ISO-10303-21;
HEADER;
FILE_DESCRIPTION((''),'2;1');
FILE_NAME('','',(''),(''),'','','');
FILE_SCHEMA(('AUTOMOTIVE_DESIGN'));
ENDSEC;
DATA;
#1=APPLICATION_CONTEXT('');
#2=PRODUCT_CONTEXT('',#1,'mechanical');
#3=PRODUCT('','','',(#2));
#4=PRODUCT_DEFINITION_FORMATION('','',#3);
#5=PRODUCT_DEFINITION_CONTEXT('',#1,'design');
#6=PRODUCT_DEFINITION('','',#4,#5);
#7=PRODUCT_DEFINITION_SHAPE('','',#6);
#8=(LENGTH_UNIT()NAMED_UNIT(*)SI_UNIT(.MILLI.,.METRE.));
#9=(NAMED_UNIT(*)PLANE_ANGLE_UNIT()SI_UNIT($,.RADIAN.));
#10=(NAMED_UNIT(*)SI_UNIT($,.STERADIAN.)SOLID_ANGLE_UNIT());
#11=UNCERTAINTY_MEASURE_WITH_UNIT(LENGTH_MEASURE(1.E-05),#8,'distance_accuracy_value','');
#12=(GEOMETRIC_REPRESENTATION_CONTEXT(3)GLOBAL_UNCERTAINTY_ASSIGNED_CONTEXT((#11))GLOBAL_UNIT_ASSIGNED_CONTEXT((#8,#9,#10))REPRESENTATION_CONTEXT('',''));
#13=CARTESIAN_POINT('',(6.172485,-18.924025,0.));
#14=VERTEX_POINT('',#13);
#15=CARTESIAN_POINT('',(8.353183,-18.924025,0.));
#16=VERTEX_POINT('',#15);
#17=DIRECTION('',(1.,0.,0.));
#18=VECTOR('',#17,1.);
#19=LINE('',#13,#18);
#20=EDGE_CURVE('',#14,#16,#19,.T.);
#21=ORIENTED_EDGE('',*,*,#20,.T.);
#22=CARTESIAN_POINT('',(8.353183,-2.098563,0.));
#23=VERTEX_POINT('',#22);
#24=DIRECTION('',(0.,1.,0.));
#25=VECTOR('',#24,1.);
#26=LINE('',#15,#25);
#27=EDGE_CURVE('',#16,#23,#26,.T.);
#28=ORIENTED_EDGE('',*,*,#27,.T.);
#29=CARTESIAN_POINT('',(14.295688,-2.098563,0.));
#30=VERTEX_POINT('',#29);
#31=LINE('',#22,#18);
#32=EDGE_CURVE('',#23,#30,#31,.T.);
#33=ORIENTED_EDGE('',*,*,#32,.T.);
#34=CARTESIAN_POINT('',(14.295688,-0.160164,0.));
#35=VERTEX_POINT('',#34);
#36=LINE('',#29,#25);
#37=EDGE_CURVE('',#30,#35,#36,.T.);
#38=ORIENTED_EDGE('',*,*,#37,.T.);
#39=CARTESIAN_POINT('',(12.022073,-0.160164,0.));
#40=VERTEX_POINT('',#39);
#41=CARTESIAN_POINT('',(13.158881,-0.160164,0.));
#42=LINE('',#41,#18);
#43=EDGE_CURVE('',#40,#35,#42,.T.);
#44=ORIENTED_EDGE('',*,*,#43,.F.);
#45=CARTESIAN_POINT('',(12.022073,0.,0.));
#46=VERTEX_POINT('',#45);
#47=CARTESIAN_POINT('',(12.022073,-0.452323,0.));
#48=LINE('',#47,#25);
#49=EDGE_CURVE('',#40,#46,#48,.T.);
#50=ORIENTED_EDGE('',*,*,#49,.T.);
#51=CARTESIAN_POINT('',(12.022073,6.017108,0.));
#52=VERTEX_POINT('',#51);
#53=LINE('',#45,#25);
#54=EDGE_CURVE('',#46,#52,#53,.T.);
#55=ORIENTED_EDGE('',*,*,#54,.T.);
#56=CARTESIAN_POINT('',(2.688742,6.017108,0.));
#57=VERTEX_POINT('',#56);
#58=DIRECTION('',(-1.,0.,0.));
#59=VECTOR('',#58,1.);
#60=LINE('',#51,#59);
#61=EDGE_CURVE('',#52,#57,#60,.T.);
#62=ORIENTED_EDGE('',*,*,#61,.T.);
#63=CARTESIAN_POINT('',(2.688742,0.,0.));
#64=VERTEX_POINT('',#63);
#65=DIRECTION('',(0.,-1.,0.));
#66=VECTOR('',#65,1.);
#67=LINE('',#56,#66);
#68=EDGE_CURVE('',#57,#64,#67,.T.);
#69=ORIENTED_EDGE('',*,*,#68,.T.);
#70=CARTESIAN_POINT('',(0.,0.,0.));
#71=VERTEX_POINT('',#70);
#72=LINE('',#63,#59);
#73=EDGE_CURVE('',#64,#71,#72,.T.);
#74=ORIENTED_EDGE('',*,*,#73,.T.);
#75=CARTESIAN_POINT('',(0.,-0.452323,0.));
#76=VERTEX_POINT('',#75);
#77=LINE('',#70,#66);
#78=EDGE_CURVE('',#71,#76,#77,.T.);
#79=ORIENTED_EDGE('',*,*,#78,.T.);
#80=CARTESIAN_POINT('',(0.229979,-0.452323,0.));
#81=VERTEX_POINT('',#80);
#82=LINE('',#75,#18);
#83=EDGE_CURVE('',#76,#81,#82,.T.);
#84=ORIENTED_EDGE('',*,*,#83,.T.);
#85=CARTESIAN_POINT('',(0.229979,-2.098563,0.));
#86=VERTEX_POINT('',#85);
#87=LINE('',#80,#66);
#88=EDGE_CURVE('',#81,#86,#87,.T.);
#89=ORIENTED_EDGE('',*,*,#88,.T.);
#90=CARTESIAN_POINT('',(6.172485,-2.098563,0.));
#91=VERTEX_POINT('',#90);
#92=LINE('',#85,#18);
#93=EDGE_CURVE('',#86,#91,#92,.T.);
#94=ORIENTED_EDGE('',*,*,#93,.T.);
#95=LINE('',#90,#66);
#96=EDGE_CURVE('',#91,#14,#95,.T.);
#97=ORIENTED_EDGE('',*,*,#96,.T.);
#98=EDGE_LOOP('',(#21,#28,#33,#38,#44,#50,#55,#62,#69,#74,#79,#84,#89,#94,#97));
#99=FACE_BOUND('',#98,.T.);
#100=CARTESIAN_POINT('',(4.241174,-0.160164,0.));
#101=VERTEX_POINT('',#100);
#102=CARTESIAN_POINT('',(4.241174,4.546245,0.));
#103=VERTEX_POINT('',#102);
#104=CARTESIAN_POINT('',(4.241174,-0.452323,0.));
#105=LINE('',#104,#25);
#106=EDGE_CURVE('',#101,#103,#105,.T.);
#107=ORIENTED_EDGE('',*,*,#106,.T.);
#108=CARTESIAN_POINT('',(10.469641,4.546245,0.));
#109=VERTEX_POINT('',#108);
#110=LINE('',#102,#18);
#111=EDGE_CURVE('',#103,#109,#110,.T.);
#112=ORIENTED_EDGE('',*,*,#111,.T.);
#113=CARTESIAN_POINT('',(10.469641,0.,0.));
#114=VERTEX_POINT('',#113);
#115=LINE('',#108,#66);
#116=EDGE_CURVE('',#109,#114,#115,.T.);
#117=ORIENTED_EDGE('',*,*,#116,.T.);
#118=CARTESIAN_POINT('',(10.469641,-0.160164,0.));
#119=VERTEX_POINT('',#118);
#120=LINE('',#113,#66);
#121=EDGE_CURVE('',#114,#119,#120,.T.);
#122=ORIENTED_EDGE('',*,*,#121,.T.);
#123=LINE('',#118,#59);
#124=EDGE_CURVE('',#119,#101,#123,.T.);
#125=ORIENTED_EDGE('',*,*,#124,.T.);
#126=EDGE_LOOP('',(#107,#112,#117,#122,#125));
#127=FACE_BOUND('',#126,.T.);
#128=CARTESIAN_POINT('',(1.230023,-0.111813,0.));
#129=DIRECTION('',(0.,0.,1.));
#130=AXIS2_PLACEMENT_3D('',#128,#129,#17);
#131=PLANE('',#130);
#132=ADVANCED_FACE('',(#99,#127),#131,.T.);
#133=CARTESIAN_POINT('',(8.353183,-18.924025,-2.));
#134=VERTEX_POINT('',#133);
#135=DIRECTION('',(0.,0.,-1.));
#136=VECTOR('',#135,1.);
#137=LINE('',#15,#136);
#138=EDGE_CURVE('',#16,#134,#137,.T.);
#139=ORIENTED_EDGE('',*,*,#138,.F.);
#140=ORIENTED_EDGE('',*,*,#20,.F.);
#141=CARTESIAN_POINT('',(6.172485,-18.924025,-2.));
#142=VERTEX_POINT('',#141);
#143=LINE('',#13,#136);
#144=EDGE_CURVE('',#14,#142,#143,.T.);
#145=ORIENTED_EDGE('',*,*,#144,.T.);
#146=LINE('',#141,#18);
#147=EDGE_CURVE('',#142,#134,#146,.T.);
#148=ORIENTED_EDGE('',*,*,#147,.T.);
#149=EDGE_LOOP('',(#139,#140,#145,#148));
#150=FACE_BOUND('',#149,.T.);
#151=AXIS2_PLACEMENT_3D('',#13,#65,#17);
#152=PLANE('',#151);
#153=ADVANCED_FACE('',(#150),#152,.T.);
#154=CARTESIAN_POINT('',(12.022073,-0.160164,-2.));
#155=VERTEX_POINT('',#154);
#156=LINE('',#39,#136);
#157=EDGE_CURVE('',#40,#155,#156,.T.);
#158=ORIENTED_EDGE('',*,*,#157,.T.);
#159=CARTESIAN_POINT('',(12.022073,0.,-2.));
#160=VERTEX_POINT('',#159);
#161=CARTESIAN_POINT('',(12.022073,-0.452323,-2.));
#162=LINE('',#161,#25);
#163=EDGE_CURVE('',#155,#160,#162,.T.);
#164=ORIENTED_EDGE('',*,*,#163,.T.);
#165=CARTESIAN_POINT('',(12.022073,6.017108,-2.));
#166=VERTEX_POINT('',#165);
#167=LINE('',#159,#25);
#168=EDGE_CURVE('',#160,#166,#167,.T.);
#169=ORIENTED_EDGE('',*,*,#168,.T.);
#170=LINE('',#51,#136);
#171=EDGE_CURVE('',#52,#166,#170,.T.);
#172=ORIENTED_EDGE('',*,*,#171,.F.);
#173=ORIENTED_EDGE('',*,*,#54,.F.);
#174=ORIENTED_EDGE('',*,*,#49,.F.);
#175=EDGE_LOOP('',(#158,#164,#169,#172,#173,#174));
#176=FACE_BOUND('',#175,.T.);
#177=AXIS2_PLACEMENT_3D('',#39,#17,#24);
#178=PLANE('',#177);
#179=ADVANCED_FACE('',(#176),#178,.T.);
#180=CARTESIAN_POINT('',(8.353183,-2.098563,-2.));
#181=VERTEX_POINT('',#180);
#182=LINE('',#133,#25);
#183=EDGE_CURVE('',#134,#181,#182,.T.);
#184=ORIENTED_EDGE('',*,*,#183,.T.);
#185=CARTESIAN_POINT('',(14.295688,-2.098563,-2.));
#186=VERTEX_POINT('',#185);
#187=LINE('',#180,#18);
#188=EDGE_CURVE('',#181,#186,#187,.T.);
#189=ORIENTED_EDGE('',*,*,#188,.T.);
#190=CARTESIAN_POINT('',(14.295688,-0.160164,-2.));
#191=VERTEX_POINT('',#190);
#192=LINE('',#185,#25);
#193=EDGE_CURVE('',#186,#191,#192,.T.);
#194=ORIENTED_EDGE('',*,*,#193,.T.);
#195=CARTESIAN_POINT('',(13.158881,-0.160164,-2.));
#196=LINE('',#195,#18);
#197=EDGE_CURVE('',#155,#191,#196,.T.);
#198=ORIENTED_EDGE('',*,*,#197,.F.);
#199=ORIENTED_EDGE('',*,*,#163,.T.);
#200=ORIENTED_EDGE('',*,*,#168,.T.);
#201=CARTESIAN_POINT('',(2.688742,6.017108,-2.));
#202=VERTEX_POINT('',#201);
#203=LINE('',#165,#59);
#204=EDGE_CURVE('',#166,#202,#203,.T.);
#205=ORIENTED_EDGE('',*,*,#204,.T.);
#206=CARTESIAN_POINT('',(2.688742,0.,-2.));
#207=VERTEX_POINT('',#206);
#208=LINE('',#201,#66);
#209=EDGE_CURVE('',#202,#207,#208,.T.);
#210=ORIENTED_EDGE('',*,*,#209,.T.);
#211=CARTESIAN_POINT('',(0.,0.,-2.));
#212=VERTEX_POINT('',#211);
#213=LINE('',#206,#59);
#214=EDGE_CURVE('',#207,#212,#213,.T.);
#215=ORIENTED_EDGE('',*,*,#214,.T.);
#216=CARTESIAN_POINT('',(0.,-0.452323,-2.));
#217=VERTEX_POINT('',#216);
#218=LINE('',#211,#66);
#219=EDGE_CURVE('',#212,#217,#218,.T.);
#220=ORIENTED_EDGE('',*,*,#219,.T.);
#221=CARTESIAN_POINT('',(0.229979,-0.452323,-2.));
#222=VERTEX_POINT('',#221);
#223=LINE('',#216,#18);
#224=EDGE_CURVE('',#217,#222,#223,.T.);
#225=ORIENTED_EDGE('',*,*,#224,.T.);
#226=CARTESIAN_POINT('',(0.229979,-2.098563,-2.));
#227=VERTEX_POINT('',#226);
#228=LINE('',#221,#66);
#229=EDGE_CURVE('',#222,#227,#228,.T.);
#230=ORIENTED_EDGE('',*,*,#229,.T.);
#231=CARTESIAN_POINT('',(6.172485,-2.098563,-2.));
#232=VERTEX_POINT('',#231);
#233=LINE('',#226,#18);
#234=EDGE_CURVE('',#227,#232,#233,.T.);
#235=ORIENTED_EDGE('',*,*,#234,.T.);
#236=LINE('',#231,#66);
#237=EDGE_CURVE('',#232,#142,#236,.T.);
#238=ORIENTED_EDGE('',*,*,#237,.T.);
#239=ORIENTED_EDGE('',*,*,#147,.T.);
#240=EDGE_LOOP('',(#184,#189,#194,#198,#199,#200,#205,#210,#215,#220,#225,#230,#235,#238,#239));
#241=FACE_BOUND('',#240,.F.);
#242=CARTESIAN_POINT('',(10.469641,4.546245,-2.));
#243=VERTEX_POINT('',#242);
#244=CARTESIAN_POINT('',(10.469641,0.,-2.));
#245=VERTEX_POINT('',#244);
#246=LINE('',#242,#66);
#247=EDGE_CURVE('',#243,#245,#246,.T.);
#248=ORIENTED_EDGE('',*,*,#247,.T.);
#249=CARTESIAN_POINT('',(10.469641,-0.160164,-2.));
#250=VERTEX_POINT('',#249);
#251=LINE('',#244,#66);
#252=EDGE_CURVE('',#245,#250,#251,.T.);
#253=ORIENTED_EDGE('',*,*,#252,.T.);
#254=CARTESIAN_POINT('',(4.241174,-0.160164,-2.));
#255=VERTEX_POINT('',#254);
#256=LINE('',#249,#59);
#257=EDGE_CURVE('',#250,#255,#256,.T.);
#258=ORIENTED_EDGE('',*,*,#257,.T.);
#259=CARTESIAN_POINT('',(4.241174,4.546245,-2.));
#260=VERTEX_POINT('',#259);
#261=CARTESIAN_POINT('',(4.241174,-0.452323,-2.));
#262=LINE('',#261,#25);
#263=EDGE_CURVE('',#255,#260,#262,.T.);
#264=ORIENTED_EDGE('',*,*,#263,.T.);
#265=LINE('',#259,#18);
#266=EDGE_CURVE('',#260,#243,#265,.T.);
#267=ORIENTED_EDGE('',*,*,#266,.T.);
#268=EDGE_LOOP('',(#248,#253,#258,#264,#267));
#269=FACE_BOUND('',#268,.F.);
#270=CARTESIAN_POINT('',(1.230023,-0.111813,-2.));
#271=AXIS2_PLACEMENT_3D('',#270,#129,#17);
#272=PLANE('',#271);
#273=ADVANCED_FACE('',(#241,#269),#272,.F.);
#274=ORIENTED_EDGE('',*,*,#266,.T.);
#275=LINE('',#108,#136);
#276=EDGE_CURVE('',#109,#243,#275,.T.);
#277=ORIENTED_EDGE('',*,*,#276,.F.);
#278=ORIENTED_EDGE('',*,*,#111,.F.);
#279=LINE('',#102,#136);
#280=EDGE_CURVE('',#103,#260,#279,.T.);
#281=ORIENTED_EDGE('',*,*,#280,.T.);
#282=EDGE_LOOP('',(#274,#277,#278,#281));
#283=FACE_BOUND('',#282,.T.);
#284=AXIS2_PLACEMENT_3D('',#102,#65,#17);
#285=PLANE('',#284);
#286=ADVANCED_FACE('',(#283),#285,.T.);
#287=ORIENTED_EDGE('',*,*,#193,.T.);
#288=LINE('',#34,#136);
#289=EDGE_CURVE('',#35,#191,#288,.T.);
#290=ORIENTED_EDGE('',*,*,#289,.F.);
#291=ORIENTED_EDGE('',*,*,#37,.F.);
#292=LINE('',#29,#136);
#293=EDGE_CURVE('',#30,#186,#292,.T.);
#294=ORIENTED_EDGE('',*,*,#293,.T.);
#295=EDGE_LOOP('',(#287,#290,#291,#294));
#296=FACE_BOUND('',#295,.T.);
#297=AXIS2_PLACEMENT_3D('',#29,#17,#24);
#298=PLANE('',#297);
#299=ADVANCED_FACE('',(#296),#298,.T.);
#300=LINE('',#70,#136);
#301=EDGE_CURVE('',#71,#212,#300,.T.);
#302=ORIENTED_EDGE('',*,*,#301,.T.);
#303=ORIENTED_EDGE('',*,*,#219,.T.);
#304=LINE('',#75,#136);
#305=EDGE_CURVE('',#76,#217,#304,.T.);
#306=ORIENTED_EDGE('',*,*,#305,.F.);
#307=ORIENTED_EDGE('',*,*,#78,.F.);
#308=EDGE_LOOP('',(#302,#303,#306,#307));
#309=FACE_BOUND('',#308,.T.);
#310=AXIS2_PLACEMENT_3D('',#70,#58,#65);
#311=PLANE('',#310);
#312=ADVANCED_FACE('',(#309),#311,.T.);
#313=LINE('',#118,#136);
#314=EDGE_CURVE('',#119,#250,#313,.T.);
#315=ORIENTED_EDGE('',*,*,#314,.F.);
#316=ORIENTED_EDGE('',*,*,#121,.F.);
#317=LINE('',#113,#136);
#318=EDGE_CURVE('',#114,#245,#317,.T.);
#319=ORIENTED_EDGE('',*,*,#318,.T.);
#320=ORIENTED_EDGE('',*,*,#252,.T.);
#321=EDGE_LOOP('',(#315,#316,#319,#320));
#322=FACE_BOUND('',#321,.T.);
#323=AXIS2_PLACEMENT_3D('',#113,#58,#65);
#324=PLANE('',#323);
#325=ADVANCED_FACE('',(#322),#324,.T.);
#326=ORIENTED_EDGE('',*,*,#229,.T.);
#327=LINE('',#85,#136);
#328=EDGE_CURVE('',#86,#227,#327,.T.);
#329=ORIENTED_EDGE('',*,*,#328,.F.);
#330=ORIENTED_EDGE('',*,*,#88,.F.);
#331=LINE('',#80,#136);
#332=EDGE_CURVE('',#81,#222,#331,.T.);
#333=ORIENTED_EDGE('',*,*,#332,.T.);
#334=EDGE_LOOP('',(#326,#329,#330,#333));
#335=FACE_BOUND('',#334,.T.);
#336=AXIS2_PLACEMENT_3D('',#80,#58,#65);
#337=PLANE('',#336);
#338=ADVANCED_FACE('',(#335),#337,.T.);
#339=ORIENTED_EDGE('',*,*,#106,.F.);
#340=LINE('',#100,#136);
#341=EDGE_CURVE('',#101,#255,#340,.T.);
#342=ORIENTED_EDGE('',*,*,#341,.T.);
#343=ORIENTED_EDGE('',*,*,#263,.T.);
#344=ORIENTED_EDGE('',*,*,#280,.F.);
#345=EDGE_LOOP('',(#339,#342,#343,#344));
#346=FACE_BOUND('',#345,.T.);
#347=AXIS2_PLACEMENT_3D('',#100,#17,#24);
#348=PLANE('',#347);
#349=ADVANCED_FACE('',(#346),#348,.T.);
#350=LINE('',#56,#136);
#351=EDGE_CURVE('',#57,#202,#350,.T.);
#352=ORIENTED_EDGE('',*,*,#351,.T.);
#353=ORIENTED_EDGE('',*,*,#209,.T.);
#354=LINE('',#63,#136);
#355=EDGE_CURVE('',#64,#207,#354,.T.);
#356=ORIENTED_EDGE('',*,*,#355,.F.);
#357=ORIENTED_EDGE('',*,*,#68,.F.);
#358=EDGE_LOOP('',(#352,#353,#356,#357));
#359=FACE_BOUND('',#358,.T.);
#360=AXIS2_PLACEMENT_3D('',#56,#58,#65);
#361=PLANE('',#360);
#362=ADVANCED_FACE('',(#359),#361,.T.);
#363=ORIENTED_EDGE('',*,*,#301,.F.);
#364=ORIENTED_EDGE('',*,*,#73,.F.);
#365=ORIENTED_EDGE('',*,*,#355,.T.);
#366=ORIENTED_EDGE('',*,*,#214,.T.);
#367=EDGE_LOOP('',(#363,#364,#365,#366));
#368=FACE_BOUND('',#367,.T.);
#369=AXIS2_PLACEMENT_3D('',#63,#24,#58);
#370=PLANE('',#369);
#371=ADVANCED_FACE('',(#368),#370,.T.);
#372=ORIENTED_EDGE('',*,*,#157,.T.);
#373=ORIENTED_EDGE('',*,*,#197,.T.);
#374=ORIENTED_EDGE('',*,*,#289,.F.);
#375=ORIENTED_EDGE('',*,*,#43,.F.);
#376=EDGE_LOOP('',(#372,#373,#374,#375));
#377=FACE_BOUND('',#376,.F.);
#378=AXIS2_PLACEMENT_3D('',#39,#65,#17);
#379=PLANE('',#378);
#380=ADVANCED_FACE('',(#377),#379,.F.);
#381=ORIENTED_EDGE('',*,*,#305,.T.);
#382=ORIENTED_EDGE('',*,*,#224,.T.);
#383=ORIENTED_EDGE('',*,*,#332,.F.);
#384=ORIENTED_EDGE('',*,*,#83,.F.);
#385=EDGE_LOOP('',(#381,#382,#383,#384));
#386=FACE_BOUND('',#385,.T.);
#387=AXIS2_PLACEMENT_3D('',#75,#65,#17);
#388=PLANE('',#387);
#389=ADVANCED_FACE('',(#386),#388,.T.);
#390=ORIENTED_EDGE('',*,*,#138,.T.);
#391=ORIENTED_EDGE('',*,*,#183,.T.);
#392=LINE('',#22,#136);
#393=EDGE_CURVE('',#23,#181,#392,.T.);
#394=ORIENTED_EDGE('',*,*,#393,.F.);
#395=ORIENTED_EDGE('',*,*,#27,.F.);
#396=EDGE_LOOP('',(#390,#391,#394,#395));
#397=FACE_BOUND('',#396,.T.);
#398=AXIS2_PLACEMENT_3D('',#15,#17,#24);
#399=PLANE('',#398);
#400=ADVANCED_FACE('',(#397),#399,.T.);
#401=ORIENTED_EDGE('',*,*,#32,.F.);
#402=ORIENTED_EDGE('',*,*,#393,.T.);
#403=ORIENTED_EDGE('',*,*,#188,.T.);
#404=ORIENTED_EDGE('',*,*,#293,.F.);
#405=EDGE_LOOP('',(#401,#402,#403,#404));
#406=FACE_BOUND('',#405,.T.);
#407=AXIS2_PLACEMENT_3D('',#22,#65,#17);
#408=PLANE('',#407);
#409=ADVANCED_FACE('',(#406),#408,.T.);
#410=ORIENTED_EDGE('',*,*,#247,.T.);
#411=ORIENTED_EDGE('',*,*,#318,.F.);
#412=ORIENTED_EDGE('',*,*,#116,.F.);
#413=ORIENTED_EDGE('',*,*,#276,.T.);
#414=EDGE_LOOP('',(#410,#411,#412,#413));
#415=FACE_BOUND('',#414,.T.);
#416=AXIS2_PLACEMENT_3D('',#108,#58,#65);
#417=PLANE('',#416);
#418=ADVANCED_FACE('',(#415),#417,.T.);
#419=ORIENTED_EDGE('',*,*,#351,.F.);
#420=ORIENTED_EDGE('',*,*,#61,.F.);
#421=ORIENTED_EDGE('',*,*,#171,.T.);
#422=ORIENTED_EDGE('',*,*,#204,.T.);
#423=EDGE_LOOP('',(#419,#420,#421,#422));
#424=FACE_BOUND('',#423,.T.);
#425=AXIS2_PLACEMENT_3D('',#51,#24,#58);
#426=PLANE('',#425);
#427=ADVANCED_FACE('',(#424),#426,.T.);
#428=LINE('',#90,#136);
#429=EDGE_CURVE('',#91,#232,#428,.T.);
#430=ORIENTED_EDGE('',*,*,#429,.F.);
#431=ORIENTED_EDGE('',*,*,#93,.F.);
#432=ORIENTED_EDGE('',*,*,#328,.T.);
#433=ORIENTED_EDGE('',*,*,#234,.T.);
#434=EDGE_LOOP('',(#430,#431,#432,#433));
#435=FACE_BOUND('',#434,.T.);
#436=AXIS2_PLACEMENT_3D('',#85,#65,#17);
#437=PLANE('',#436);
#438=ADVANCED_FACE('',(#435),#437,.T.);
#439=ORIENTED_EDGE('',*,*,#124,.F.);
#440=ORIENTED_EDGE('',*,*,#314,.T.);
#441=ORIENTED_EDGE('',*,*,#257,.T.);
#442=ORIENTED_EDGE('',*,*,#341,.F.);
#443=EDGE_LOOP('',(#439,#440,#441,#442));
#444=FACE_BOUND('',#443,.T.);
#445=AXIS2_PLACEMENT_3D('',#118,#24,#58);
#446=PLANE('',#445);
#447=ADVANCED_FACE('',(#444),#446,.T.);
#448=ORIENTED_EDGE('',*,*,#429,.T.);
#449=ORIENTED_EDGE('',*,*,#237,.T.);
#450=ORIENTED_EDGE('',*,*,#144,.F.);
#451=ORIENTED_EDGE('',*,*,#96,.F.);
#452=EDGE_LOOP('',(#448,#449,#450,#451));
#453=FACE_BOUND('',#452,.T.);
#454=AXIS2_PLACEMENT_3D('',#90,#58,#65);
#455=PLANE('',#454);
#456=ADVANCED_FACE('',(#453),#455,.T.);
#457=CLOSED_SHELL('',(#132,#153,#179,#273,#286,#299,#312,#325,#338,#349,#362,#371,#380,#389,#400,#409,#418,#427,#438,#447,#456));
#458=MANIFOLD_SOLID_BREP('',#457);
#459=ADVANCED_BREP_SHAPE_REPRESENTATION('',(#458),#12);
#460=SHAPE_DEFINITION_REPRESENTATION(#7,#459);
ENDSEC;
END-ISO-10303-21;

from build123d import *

# Parameters (mm, degrees)
F0_W     = 1.5524325391
F0_H     = 0.160164271
F0_W_2   = 2.4587620781
F0_H_2   = 0.2921586143
F0_W_3   = 2.2736147407
F0_W_4   = 3.1142332609
F0_W_5   = 2.4696406052
F0_W_6   = 0.6445926557
F1_DEPTH = 2


with BuildPart() as f1:
    # F0 (on Top) → F1 (new body)
    with BuildSketch(Plane.XY):
        Polygon((2.6887415443, 0), (0, 0), (0, -0.4523228854), (0.2299794661, -0.4523228854), (0.2299794661, -0.160164271), (2.6887415443, -0.160164271), align=None)
        Polygon((2.6887415443, 6.0171082268), (2.6887415443, 0), (4.2411740834, 0), (4.2411740834, 4.546245339), (7.3554073443, 4.546245339), (7.3554073443, 6.0171082268), align=None)
        with Locations((3.4649578138, -0.0800821355)):
            Rectangle(F0_W, F0_H)
        with Locations((1.4593605052, -0.3062435782)):
            Rectangle(F0_W_2, F0_H_2)
        Polygon((2.6887415443, -0.4523228854), (0.2299794661, -0.4523228854), (0.2299794661, -2.0985626283), (6.1724845996, -2.0985626283), (6.1724845996, -18.9240246407), (8.3531827515, -18.9240246407), (8.3531827515, -2.0985626283), (14.295687885, -2.0985626283), (14.295687885, -0.4523228854), (12.0220731443, -0.4523228854), (12.0220731443, -1.9231857732), (7.3554073443, -1.9231857732), (2.6887415443, -1.9231857732), align=None)
        Polygon((12.0220731443, 6.0171082268), (7.3554073443, 6.0171082268), (7.3554073443, 4.546245339), (10.4696406052, 4.546245339), (10.4696406052, 0), (12.0220731443, 0), align=None)
        with Locations((11.2458568747, -0.0800821355)):
            Rectangle(F0_W, F0_H)
        with Locations((11.2458568747, -0.3062435782)):
            Rectangle(F0_W, F0_H_2)
        with Locations((13.1588805146, -0.3062435782)):
            Rectangle(F0_W_3, F0_H_2)
        Polygon((8, -0.4523228854), (7.3554073443, -0.4523228854), (7.3554073443, -1.9231857732), (12.0220731443, -1.9231857732), (12.0220731443, -0.4523228854), (10.4696406052, -0.4523228854), align=None)
        Polygon((4.2411740834, -0.4523228854), (2.6887415443, -0.4523228854), (2.6887415443, -1.9231857732), (7.3554073443, -1.9231857732), (7.3554073443, -0.4523228854), align=None)
        with Locations((3.4649578138, -0.3062435782)):
            Rectangle(F0_W, F0_H_2)
        with Locations((5.7982907138, -0.3062435782)):
            Rectangle(F0_W_4, F0_H_2)
        with Locations((9.2348203026, -0.3062435782)):
            Rectangle(F0_W_5, F0_H_2)
        with Locations((7.6777036721, -0.3062435782)):
            Rectangle(F0_W_6, F0_H_2)
    extrude(amount=-F1_DEPTH)


solid = f1.part
